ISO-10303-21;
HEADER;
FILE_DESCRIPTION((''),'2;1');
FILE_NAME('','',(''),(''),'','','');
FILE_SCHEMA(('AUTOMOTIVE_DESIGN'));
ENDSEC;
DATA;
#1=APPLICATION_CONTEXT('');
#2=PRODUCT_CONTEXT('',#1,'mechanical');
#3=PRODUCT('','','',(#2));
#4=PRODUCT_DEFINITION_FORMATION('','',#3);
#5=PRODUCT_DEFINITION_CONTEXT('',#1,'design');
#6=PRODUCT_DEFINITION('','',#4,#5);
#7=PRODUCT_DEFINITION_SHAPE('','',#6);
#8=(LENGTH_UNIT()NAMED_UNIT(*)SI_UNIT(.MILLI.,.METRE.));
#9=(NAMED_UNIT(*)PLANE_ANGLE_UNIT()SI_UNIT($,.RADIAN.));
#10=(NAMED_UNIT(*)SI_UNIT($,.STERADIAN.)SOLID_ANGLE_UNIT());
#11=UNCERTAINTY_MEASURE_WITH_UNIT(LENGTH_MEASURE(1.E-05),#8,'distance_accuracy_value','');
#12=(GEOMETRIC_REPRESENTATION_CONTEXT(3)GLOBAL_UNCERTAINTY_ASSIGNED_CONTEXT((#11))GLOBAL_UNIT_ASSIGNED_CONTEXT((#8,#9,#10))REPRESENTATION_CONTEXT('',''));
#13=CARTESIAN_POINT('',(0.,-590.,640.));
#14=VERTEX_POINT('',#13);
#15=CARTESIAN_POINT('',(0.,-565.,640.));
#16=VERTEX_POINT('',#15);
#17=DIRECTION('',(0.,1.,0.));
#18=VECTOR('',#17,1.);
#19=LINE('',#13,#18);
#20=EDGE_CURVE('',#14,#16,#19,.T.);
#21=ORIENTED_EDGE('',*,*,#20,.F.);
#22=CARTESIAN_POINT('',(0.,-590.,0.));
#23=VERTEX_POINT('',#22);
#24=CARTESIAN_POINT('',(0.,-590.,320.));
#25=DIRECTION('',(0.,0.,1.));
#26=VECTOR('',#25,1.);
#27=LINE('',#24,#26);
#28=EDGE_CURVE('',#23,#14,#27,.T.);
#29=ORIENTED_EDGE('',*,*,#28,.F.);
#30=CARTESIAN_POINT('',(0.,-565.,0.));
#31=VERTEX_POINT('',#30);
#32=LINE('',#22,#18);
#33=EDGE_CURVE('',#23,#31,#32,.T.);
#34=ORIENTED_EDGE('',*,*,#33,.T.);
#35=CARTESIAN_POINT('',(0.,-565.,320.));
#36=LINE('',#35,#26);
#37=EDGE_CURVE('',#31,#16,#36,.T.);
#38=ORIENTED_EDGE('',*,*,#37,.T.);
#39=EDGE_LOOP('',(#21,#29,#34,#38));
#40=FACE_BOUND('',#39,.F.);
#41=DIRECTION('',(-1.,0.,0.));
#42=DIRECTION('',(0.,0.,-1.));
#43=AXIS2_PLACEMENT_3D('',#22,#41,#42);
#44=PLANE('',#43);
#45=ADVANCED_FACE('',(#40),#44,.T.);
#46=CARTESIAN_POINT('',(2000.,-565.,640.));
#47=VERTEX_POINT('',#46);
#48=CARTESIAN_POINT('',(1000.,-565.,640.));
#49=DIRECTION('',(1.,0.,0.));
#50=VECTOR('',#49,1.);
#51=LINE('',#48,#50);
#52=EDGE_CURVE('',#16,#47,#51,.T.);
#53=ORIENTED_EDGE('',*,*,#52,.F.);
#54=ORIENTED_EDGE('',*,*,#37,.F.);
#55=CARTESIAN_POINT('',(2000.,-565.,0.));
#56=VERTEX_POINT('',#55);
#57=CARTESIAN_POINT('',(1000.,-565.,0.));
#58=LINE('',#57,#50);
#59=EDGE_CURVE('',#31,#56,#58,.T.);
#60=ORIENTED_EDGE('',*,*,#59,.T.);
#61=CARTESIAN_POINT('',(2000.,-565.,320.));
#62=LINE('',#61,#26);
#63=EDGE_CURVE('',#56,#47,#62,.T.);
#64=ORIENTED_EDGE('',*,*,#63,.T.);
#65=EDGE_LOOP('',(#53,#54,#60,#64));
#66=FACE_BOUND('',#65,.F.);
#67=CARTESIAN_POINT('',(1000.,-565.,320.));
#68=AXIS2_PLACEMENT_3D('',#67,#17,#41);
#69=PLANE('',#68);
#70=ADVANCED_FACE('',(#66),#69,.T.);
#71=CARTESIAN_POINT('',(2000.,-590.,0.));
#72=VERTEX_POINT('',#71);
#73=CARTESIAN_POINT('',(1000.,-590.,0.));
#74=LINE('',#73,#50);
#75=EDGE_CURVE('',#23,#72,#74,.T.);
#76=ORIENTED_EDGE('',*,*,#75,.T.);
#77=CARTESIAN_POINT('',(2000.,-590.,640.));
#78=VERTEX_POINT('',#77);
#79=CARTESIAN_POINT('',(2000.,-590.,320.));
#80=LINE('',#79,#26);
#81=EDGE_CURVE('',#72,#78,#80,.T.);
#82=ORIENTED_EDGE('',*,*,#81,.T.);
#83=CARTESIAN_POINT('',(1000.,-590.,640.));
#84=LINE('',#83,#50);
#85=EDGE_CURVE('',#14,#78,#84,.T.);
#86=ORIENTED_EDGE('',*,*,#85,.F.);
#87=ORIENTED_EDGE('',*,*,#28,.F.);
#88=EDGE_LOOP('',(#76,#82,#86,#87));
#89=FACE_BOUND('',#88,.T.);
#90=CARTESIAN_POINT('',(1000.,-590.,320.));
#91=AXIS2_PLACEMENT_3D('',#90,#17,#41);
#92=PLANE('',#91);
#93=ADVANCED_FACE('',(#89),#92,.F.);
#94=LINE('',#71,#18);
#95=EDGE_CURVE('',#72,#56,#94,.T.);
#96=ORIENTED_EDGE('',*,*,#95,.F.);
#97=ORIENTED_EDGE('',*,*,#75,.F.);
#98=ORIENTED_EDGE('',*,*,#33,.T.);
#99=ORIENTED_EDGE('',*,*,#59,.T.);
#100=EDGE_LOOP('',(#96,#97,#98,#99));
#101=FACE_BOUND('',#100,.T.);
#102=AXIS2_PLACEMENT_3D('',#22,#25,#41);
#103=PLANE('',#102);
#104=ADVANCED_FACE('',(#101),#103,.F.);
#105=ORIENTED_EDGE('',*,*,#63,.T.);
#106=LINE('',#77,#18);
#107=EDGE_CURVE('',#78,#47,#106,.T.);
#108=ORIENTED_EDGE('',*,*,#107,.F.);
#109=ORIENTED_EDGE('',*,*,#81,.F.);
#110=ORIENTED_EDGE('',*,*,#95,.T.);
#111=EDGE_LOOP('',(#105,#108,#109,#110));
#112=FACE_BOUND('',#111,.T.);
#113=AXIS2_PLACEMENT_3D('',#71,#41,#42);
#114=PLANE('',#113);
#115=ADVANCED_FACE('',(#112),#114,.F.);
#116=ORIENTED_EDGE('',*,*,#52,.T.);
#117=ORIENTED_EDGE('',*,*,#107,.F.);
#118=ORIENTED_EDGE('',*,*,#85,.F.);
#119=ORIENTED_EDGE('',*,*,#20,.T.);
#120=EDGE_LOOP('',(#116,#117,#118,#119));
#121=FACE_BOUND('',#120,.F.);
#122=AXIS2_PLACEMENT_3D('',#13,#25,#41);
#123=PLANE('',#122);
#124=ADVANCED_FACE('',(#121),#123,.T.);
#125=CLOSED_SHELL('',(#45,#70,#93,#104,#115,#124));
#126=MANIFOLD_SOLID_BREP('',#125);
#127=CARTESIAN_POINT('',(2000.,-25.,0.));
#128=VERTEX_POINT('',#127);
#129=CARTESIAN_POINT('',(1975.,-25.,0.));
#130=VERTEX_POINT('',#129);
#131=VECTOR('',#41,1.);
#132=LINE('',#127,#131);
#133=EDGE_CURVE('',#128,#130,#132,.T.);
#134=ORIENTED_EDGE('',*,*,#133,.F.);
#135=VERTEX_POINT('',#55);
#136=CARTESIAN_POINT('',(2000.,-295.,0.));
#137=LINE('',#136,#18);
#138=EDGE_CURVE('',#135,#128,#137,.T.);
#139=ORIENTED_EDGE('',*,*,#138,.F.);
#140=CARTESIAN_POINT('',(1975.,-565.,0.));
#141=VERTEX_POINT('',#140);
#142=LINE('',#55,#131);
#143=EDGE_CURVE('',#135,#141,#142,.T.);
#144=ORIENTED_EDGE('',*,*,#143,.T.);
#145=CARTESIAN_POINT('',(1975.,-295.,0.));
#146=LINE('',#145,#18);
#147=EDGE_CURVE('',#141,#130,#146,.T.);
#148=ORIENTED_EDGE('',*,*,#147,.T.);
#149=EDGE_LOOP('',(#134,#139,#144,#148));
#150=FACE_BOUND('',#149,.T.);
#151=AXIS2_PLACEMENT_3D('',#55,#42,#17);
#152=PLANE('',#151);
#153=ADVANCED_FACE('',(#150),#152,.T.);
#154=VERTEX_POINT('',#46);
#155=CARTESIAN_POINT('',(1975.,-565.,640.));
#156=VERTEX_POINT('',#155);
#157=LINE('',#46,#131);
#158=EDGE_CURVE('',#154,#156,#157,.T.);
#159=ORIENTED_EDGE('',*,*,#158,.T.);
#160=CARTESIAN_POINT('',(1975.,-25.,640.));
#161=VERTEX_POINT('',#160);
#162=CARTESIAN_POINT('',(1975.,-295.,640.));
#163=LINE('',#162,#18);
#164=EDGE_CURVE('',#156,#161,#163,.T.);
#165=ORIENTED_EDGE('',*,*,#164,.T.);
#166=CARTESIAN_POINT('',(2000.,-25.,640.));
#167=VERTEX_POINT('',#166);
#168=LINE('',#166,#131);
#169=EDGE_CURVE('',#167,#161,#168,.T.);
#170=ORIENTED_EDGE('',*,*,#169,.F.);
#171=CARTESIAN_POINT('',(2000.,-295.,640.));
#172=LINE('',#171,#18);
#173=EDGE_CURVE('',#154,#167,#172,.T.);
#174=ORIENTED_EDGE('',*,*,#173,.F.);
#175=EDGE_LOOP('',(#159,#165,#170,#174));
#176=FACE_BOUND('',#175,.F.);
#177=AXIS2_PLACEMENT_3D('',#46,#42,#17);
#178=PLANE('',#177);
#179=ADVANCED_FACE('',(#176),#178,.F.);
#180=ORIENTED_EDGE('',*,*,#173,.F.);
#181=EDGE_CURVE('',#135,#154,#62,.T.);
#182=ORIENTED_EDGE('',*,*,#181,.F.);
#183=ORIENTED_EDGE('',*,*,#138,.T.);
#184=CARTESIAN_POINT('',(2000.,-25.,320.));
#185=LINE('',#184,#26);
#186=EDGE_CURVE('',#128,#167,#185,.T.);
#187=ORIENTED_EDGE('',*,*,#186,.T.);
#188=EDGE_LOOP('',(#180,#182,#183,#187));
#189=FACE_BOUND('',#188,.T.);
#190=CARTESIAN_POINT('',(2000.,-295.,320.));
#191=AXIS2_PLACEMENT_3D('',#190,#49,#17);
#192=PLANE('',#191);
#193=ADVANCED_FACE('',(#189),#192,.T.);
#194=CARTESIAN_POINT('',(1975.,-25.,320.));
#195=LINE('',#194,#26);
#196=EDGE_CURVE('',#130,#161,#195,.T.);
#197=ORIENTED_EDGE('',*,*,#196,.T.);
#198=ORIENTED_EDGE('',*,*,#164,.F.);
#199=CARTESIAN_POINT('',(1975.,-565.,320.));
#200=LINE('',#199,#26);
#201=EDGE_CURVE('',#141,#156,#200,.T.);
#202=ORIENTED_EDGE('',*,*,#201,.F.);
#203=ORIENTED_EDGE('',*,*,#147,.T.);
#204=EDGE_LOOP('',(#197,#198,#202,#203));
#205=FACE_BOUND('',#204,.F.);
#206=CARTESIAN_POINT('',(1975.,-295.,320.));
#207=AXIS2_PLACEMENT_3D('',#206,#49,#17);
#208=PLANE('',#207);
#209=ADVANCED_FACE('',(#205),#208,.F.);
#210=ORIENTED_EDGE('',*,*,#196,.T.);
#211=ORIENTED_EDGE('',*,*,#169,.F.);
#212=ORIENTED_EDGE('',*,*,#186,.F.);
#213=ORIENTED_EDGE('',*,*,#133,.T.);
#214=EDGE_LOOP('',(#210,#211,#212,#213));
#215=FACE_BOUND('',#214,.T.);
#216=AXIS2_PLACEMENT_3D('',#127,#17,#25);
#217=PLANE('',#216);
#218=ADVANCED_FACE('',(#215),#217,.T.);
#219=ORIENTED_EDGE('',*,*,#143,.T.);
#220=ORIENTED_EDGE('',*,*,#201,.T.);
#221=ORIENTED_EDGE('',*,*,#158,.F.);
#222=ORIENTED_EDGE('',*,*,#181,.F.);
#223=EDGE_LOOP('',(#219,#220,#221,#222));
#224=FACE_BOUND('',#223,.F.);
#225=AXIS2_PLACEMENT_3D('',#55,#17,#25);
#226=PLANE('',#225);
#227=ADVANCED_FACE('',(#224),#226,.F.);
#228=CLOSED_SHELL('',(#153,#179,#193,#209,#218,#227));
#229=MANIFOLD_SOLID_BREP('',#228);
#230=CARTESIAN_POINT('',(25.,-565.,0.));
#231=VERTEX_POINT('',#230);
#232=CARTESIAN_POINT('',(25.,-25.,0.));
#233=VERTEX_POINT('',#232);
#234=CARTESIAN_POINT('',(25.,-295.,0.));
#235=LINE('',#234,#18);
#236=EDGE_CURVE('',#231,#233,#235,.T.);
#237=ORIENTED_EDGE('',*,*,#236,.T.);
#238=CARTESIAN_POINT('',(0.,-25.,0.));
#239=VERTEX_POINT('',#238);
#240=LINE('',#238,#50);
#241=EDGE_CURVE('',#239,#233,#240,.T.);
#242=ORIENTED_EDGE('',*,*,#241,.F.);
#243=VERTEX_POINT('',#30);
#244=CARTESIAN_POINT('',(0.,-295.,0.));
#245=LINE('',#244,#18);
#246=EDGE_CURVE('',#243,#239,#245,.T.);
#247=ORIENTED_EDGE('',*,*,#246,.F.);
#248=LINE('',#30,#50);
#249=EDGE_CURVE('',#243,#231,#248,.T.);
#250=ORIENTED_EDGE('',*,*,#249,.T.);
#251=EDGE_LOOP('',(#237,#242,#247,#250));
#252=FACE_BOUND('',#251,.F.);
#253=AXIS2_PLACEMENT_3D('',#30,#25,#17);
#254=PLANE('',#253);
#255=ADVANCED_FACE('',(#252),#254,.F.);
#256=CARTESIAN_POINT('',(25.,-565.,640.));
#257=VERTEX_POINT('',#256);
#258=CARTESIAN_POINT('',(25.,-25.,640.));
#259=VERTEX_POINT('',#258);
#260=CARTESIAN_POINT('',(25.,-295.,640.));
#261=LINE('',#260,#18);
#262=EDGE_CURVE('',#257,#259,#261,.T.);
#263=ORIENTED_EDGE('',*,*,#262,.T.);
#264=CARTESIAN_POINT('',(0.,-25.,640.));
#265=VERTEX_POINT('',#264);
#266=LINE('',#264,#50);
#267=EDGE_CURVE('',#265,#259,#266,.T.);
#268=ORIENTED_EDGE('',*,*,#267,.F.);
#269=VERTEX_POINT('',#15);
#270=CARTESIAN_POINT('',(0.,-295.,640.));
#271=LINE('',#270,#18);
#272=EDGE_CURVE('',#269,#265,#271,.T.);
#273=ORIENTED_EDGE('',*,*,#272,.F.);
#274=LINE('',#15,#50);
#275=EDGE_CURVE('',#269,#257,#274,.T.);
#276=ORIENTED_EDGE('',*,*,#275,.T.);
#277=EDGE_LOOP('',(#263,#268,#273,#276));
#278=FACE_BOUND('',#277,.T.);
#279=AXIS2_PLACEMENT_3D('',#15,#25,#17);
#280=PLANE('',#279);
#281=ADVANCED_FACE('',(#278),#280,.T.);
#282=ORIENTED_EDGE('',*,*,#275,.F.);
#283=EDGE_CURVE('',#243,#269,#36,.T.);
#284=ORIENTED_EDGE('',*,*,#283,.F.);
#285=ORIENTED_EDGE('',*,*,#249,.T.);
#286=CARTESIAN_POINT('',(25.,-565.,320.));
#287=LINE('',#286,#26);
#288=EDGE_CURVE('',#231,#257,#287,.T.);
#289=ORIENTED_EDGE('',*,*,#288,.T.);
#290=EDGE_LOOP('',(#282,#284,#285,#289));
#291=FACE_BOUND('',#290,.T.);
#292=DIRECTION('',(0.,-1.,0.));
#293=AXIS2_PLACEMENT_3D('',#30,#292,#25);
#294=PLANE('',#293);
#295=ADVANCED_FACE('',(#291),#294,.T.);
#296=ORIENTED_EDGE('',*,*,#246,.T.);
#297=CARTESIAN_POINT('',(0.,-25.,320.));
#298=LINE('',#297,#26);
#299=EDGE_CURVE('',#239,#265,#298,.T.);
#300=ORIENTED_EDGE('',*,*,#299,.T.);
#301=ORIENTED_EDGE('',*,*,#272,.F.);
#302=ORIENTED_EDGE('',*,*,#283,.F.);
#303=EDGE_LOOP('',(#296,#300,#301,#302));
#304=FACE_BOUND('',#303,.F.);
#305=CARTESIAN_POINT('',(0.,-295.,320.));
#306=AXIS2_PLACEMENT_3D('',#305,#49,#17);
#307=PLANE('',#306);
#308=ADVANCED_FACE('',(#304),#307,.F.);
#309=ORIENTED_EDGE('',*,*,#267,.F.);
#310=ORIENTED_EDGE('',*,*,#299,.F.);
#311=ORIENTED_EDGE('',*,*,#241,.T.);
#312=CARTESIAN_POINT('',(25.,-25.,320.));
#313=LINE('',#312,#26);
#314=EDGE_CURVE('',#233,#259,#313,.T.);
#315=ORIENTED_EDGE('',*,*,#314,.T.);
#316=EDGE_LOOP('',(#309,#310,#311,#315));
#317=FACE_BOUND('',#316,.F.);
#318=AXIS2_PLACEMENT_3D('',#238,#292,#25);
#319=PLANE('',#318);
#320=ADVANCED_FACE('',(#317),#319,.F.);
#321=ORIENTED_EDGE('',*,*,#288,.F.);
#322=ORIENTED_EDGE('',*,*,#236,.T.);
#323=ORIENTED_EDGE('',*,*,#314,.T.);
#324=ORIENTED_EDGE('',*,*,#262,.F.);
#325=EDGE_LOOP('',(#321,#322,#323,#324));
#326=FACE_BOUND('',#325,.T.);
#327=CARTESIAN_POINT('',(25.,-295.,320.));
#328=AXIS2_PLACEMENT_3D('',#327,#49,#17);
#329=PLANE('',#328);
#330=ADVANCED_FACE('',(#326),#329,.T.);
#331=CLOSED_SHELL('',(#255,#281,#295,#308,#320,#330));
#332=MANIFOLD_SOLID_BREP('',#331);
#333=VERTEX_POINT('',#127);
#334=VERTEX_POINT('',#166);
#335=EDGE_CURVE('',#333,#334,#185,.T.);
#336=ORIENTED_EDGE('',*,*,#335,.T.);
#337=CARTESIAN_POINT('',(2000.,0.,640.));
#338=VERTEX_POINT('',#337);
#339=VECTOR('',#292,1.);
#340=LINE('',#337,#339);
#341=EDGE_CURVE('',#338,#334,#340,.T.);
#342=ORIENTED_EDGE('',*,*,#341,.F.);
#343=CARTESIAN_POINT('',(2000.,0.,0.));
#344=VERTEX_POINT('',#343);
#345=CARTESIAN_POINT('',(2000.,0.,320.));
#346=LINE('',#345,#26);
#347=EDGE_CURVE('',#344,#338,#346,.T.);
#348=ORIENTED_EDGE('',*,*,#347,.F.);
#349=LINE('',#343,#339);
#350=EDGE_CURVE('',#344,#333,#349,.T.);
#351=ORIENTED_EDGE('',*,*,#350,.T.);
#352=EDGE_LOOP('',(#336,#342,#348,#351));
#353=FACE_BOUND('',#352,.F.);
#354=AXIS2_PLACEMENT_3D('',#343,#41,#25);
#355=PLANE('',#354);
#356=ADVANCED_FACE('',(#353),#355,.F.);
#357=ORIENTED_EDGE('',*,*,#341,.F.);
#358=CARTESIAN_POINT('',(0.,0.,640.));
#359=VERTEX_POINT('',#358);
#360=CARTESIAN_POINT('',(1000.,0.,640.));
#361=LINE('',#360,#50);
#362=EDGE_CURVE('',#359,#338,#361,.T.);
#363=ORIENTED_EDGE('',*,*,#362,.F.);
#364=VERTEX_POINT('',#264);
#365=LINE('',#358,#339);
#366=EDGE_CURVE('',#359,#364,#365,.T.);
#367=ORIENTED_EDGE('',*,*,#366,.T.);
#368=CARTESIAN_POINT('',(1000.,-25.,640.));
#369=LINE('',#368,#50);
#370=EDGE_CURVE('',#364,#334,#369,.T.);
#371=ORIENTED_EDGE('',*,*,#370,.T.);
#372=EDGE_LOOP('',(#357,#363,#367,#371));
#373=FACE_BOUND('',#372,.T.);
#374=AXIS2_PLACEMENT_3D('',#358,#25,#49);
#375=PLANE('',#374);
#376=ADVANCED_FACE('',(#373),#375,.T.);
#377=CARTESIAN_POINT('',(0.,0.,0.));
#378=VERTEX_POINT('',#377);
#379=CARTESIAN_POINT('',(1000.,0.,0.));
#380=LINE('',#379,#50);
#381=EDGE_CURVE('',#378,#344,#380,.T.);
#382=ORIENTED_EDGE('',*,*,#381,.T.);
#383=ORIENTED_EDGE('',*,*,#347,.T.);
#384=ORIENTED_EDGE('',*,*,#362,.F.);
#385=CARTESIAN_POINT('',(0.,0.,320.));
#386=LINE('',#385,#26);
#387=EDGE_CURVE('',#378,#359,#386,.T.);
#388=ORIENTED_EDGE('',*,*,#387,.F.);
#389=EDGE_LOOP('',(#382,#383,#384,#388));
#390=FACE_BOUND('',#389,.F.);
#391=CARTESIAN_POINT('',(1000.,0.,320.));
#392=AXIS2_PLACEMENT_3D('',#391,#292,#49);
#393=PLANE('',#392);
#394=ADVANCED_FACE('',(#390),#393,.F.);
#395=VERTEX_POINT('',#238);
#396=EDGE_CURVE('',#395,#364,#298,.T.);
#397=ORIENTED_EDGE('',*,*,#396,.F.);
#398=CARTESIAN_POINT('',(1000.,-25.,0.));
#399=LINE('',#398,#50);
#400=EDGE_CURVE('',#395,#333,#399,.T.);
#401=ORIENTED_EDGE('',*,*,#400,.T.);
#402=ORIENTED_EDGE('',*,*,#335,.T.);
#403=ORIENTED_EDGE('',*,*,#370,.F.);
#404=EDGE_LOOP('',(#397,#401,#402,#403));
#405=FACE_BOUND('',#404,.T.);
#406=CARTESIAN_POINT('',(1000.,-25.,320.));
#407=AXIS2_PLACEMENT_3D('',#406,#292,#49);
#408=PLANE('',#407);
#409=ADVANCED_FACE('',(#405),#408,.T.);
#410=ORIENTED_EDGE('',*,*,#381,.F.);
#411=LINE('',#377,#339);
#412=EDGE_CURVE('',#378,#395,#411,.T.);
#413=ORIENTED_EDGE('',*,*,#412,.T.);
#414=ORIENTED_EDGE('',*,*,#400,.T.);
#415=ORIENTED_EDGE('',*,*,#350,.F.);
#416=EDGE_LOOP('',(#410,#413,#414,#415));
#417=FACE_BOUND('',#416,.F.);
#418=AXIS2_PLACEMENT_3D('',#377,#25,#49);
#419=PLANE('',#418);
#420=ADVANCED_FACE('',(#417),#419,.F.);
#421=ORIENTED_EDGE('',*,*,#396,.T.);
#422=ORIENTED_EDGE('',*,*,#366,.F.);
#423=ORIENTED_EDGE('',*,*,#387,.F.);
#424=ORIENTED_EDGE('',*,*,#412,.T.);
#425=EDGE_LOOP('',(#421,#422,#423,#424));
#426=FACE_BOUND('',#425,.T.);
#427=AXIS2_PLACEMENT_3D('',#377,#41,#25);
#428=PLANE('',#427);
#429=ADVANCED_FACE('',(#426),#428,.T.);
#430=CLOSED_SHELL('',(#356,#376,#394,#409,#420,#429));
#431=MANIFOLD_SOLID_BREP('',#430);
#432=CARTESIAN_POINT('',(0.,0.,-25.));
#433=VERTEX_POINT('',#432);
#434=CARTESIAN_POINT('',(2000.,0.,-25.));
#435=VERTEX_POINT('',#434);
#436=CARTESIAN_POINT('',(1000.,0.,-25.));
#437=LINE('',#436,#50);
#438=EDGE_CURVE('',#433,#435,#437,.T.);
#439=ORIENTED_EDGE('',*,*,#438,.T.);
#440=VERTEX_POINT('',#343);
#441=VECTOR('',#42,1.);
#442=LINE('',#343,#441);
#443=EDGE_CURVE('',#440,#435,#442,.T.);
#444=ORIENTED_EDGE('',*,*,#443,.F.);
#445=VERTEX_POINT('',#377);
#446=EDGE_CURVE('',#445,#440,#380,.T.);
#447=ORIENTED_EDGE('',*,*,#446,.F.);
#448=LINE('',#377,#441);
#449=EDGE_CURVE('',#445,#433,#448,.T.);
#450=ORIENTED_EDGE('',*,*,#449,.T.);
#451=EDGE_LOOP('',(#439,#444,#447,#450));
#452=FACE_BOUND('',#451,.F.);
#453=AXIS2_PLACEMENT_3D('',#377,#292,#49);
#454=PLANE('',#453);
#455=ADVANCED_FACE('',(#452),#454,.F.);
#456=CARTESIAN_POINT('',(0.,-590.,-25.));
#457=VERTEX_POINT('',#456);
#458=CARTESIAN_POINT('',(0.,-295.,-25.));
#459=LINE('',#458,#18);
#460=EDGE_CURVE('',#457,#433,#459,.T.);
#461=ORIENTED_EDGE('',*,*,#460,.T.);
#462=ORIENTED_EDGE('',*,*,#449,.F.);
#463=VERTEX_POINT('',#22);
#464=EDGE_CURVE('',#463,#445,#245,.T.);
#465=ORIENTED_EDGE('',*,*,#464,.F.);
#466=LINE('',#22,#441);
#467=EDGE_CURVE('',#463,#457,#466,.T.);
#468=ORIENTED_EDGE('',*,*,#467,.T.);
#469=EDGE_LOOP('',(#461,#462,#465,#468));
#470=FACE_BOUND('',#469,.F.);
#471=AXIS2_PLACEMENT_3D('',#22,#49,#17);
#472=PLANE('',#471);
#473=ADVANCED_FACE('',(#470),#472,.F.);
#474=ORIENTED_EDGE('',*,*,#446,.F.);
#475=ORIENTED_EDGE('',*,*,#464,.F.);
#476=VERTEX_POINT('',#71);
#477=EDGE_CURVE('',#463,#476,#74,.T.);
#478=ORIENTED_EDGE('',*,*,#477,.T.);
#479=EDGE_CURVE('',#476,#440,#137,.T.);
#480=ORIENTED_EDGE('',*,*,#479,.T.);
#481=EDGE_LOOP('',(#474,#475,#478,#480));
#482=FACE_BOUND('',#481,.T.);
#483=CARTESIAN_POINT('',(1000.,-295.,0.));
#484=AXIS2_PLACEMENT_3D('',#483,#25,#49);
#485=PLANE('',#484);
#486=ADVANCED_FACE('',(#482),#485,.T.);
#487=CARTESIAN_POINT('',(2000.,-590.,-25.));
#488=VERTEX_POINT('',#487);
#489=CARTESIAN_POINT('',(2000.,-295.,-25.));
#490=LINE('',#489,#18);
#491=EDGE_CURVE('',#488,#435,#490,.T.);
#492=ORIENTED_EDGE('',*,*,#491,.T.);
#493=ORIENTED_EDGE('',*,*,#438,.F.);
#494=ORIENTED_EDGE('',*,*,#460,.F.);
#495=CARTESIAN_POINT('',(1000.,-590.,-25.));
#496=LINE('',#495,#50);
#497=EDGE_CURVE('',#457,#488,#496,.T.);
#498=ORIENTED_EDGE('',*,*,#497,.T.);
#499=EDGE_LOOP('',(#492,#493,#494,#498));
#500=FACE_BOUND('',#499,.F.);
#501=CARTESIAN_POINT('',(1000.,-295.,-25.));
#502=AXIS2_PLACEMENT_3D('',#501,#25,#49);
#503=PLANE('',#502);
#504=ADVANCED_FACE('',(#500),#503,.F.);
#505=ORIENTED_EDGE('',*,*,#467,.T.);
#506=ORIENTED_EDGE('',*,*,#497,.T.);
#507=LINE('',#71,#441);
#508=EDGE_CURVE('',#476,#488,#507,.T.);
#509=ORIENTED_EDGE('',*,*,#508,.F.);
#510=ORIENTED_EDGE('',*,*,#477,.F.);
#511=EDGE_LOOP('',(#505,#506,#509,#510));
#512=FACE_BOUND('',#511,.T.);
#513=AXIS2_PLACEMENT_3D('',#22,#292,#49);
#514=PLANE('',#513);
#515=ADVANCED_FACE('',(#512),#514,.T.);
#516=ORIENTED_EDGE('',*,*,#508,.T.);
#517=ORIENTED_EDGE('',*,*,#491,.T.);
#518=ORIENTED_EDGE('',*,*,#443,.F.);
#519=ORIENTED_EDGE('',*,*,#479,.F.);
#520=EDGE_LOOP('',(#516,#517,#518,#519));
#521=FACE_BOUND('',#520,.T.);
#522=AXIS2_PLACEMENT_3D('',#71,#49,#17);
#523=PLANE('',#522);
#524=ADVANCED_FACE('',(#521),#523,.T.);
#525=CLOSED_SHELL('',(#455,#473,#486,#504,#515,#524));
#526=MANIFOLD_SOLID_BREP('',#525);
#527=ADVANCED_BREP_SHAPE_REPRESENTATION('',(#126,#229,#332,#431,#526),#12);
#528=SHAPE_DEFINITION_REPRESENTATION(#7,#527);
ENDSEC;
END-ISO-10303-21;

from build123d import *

# Parameters (mm, degrees)
F0_W     = 2000
F0_H     = 640
F1_DEPTH = 25
F2_W     = 2000
F2_H     = 590
F3_DEPTH = 25
F5_W     = 540
F5_H     = 640
F6_DEPTH = 25
F7_W     = 540
F7_H     = 640
F8_DEPTH = 25


# Not quite as in the source:
# - a feature of the source that left no trace in its solid (it failed there, or was rolled back) is left out
# - a pattern or mirror of a feature is missing from the dataset's text; its kind, count and spacing are read off the source's solid


with BuildPart() as f1:
    # F0 (on Front) → F1 (new body)
    with BuildSketch(Plane.XZ):
        with Locations((1000, 320)):
            Rectangle(F0_W, F0_H)
    extrude(amount=F1_DEPTH)


with BuildPart() as f1_copies_1:
    # F1_copies: instance of F1
    add(f1.part.mirror(Plane(origin=(0, -295, 0), x_dir=(0, 0, -1), z_dir=(0, -1, 0))))


with BuildPart() as f3:
    # F2 (on Top) → F3 (new body)
    with BuildSketch(Plane.XY):
        with Locations((1000, -295)):
            Rectangle(F2_W, F2_H)
    extrude(amount=-F3_DEPTH)


with BuildPart() as f6:
    # F5 (on Right) → F6 (new body)
    with BuildSketch(Plane.YZ):
        with Locations((-295, 320)):
            Rectangle(F5_W, F5_H)
    extrude(amount=F6_DEPTH)


with BuildPart() as f8:
    # F7 (on face) → F8 (new body)
    with BuildSketch(Plane.YZ.offset(2000)):
        with Locations((-295, 320)):
            Rectangle(F7_W, F7_H)
    extrude(amount=-F8_DEPTH)


solid = Compound([f1.part, f1_copies_1.part, f3.part, f6.part, f8.part])
